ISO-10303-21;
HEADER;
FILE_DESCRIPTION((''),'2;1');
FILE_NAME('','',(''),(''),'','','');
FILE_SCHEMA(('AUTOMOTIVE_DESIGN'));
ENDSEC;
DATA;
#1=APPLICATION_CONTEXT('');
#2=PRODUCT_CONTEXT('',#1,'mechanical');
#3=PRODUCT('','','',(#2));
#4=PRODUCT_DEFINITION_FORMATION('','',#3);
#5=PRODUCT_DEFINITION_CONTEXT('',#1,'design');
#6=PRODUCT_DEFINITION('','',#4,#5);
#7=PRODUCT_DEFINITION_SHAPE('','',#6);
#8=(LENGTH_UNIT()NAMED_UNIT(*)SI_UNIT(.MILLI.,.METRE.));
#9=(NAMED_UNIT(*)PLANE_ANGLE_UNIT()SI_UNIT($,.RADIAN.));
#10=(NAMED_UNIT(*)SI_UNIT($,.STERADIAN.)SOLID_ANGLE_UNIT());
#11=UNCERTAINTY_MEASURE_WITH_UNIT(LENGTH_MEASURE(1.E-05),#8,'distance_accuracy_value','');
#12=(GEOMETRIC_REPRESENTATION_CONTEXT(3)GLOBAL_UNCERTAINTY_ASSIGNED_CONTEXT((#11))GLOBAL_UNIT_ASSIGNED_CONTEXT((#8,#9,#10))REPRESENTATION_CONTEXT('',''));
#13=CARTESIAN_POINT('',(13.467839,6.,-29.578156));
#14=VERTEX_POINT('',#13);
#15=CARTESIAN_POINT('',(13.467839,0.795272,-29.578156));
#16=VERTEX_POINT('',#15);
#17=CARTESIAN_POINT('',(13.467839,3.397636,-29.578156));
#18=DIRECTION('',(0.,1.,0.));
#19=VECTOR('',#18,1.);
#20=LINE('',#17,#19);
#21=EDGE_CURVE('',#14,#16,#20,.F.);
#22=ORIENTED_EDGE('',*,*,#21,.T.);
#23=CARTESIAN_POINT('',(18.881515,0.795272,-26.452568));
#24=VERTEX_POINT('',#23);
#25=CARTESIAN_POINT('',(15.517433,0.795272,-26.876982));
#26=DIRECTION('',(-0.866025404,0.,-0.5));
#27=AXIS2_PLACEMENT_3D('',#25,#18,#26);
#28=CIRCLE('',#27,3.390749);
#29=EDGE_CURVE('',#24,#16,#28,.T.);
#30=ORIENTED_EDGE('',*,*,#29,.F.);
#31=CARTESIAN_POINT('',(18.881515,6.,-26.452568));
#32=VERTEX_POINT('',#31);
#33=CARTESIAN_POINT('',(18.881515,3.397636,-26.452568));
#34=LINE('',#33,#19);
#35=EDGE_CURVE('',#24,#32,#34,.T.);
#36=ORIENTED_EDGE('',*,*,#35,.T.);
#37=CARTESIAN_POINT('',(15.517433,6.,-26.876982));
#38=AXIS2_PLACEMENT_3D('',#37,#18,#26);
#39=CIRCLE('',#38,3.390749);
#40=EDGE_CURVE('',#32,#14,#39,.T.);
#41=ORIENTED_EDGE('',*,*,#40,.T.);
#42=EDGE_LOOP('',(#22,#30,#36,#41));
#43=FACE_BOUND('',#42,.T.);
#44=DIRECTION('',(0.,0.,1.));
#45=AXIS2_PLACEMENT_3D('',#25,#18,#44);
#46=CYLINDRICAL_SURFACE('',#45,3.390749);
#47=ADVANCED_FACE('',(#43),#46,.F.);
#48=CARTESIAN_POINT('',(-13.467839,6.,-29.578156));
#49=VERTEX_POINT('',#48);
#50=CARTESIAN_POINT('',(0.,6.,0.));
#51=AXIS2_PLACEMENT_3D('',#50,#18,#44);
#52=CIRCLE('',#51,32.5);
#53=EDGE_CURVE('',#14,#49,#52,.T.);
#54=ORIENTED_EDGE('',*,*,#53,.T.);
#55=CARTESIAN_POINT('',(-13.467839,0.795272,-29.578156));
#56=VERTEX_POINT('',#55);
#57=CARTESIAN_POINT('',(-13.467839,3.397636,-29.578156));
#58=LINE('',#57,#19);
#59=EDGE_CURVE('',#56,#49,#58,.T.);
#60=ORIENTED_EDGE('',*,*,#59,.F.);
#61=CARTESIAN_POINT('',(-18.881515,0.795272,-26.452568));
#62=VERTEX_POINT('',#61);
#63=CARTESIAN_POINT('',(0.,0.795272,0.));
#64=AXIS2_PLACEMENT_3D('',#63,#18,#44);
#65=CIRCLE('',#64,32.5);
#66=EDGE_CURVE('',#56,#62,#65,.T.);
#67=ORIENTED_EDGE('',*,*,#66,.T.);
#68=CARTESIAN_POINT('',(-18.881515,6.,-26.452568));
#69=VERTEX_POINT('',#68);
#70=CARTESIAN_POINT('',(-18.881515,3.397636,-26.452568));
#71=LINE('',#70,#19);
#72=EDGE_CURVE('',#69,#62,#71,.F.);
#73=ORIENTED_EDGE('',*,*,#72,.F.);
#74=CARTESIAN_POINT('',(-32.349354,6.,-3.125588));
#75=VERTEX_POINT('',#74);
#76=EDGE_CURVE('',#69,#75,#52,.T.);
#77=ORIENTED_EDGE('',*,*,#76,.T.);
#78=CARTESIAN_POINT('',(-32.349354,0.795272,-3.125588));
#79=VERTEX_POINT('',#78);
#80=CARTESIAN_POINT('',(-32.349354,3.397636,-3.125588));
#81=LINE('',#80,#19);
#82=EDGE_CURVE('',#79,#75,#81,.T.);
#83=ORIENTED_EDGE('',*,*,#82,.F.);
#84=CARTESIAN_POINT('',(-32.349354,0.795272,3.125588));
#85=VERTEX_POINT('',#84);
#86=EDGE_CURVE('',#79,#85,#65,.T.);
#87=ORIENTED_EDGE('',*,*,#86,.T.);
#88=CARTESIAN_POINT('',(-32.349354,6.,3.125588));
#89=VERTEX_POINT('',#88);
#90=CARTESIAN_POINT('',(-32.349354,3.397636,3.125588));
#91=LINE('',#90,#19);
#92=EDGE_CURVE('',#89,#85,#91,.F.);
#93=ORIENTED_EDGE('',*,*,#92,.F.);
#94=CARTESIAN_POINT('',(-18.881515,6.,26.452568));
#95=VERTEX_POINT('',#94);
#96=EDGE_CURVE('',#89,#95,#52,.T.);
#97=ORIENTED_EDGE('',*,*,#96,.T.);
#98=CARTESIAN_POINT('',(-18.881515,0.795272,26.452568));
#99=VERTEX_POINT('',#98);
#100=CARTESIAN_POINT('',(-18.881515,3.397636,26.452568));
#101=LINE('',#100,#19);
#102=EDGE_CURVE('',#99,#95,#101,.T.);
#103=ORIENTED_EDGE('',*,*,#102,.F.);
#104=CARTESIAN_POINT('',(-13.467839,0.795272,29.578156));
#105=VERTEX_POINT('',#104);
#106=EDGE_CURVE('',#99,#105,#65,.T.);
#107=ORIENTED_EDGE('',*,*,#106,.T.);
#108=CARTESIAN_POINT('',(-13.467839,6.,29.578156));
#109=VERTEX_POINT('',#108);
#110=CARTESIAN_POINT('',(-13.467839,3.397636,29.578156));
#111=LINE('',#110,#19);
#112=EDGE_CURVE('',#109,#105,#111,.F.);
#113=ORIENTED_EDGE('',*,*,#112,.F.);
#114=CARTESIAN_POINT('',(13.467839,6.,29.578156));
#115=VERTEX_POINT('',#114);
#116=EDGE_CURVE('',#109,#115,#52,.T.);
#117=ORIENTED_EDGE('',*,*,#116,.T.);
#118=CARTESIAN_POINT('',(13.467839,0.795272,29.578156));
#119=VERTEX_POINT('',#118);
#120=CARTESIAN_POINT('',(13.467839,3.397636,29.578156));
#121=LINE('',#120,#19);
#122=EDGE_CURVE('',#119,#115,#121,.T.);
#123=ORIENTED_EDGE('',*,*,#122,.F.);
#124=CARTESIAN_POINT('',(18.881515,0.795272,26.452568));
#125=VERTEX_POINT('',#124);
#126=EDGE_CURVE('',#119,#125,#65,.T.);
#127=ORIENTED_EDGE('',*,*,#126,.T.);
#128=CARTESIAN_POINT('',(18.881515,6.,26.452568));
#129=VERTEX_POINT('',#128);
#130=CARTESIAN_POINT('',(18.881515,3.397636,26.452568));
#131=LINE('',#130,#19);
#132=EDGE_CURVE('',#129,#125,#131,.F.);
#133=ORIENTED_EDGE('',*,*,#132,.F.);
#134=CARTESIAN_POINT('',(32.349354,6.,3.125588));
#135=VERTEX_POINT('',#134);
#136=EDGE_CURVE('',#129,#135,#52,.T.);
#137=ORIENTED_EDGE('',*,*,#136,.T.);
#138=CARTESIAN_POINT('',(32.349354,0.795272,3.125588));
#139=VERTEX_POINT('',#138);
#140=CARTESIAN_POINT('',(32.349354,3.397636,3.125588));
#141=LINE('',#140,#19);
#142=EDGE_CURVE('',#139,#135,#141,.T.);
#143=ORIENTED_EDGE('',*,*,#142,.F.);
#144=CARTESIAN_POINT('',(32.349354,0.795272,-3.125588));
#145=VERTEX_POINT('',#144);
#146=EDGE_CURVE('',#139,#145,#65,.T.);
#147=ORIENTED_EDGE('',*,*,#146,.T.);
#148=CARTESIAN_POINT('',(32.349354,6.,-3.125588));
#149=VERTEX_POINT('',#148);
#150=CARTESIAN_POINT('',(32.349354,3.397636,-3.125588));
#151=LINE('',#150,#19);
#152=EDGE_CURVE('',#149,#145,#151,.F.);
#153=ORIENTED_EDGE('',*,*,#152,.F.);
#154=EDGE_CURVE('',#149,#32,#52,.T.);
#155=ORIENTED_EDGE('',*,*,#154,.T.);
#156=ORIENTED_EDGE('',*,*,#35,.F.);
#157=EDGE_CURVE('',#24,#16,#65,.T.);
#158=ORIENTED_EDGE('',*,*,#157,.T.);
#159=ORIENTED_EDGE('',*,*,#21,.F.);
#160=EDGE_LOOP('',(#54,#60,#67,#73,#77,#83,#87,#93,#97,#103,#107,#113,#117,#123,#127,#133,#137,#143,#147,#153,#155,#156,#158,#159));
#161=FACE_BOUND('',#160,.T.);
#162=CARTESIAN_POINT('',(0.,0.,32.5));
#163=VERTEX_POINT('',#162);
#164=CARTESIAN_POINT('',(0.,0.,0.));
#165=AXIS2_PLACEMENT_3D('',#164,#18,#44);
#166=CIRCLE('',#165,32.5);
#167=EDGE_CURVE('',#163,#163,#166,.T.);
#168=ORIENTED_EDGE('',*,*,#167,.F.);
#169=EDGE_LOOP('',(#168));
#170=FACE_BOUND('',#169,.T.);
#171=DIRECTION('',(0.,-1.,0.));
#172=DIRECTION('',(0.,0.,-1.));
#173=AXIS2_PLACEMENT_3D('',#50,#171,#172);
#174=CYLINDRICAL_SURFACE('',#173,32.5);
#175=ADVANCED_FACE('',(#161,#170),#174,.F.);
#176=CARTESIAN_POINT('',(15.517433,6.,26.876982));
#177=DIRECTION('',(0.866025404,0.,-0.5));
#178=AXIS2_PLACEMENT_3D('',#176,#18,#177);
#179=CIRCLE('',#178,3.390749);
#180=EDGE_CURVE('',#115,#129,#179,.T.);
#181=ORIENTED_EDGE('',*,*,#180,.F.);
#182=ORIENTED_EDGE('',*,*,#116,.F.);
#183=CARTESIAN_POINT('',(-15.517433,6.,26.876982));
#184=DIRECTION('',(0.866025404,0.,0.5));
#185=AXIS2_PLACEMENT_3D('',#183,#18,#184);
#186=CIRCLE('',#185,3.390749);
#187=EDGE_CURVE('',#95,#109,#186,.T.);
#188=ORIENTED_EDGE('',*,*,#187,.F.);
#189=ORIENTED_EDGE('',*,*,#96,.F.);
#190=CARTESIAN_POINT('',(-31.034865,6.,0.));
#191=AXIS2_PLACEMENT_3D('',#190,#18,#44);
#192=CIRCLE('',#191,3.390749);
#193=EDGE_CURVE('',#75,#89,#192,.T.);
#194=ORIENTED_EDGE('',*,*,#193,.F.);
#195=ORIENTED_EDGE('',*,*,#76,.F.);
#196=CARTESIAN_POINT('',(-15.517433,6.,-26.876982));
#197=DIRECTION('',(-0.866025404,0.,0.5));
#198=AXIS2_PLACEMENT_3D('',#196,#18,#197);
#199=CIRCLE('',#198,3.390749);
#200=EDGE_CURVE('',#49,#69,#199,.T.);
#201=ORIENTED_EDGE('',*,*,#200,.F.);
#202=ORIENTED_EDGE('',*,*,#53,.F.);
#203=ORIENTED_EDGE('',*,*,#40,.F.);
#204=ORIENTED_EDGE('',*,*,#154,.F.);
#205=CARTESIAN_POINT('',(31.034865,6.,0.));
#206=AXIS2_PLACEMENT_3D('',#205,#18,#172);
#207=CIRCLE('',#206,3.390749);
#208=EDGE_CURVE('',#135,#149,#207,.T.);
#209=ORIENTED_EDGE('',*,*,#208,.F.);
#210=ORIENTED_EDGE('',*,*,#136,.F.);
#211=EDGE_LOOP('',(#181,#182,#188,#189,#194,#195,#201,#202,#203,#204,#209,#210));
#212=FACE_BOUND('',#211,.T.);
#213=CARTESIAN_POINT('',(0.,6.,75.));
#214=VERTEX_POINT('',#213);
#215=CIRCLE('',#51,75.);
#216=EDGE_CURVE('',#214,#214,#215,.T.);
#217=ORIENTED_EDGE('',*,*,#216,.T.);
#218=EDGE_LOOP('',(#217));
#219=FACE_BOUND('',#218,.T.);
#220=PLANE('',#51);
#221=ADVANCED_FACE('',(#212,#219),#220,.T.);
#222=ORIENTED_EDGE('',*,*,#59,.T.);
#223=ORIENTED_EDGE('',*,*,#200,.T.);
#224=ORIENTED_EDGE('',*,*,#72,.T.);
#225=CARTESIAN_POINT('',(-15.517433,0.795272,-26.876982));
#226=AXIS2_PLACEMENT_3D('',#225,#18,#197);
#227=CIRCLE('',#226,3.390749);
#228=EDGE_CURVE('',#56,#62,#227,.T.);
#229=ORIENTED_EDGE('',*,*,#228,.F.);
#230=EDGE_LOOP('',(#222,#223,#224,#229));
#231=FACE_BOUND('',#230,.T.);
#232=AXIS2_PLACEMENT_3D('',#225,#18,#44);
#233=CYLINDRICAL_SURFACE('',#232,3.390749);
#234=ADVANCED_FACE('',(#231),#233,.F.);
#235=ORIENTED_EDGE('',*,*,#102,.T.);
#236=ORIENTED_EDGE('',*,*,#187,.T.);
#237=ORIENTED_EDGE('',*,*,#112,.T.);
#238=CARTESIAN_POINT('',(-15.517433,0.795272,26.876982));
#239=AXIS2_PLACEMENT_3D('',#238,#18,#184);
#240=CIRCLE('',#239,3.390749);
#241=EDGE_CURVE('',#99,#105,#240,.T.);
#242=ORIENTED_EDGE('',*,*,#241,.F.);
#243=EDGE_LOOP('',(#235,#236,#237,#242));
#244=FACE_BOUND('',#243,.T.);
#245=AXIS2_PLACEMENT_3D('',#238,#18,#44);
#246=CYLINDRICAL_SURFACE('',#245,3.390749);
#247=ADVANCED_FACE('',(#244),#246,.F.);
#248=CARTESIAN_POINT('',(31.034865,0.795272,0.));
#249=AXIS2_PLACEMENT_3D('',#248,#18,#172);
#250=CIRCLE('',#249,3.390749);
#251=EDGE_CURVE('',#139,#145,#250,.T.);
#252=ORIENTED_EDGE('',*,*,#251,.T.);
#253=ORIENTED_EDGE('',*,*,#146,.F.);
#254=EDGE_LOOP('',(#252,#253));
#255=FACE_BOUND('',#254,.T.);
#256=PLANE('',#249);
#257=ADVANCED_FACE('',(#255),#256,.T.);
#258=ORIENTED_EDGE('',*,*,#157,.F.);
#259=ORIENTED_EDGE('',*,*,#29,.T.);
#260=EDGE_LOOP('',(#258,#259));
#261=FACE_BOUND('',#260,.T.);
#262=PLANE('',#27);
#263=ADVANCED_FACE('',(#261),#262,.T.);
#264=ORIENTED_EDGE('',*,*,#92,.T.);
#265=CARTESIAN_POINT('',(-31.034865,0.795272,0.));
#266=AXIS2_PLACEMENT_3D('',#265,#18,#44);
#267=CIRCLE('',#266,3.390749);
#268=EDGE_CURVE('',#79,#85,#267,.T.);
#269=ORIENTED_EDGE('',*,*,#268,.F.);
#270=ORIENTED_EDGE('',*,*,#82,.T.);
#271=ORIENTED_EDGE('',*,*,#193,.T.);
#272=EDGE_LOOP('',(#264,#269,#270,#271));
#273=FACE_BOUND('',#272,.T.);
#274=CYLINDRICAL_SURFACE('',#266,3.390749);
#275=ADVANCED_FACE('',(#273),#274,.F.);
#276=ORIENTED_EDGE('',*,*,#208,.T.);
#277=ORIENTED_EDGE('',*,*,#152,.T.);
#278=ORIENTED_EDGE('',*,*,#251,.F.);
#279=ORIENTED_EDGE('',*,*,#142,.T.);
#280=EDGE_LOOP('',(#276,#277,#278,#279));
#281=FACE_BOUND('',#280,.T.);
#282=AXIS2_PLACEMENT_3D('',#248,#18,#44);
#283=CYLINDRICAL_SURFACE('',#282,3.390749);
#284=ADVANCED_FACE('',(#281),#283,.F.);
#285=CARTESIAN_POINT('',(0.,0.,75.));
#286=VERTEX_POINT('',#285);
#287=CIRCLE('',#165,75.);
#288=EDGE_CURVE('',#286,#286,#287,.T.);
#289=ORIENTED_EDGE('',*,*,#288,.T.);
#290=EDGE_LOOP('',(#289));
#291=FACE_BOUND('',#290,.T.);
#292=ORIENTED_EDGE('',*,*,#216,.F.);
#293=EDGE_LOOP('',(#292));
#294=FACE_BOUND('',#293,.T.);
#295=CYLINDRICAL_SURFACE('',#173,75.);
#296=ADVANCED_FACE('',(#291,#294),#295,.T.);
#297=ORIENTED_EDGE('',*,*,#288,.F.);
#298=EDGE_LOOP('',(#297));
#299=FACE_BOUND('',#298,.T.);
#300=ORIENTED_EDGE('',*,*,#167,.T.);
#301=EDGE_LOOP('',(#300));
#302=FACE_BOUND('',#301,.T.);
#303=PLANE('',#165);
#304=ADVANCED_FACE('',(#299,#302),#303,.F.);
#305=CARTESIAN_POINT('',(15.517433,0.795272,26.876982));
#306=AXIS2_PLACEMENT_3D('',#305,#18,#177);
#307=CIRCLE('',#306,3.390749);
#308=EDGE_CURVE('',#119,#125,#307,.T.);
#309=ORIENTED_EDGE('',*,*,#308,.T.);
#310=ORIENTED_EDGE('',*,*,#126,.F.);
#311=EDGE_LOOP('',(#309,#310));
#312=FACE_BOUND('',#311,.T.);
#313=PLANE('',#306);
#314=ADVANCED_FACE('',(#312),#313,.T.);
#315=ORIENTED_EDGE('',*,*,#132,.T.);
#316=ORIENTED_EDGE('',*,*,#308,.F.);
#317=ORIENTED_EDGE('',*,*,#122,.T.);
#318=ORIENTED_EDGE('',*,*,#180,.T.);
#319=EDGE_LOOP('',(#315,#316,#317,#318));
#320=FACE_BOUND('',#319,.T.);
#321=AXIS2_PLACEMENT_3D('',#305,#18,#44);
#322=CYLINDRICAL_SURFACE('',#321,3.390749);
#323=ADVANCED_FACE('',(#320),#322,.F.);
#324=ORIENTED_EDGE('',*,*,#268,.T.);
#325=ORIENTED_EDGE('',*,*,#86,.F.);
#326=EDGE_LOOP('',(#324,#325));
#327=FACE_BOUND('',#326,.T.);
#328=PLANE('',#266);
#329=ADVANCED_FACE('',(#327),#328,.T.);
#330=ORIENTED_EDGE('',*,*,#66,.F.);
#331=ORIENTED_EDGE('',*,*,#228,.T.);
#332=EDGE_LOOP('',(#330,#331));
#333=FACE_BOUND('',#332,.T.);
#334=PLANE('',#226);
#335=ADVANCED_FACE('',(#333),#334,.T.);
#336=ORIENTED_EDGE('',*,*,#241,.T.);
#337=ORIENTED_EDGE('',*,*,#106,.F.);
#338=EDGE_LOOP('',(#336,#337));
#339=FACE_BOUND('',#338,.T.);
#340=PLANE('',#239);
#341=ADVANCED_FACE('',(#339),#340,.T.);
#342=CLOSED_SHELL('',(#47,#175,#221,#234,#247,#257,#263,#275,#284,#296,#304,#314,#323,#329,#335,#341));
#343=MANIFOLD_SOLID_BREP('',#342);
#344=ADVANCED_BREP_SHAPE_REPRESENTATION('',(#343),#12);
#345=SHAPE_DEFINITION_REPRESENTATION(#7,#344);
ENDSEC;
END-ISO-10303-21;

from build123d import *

# Parameters (mm, degrees)
SKETCH1_R           = 75
BOSS_EXTRUDE1_DEPTH = 6
SKETCH2_R           = 32.5
CUT_EXTRUDE1_DEPTH  = 107.235587258
SKETCH3_R           = 3.390748994
CUT_EXTRUDE2_DEPTH  = 5.20472754
CIRPATTERN1_COUNT   = 6


with BuildPart() as part:
    # Sketch1 → Boss-Extrude1 (new body)
    with BuildSketch(Plane(origin=(0, 0, 0), x_dir=(1, 0, 0), z_dir=(0, 1, 0))):
        Circle(SKETCH1_R)
    extrude(amount=BOSS_EXTRUDE1_DEPTH)

    # Sketch2 → Cut-Extrude1 (cut, through all)
    with BuildSketch(Plane(origin=(0, 0, 0), x_dir=(1, 0, 0), z_dir=(0, 1, 0))):
        Circle(SKETCH2_R)
    extrude(amount=CUT_EXTRUDE1_DEPTH, mode=Mode.SUBTRACT)

    # Sketch3 → Cut-Extrude2 (cut)
    with BuildSketch(Plane(origin=(0, 6, 0), x_dir=(1, 0, 0), z_dir=(0, 1, 0))):
        with Locations((-31.034865261, 0)):
            Circle(SKETCH3_R)
    cut_extrude2 = extrude(amount=-CUT_EXTRUDE2_DEPTH, mode=Mode.SUBTRACT)

    # CirPattern1: Cut-Extrude2 ×6 about axis
    cirpattern1_axis = Axis((0, 0, 0), (0, 1, 0))
    for i in range(1, CIRPATTERN1_COUNT):
        add(cut_extrude2.rotate(cirpattern1_axis, i * 360 / CIRPATTERN1_COUNT), mode=Mode.SUBTRACT)


solid = part.part
